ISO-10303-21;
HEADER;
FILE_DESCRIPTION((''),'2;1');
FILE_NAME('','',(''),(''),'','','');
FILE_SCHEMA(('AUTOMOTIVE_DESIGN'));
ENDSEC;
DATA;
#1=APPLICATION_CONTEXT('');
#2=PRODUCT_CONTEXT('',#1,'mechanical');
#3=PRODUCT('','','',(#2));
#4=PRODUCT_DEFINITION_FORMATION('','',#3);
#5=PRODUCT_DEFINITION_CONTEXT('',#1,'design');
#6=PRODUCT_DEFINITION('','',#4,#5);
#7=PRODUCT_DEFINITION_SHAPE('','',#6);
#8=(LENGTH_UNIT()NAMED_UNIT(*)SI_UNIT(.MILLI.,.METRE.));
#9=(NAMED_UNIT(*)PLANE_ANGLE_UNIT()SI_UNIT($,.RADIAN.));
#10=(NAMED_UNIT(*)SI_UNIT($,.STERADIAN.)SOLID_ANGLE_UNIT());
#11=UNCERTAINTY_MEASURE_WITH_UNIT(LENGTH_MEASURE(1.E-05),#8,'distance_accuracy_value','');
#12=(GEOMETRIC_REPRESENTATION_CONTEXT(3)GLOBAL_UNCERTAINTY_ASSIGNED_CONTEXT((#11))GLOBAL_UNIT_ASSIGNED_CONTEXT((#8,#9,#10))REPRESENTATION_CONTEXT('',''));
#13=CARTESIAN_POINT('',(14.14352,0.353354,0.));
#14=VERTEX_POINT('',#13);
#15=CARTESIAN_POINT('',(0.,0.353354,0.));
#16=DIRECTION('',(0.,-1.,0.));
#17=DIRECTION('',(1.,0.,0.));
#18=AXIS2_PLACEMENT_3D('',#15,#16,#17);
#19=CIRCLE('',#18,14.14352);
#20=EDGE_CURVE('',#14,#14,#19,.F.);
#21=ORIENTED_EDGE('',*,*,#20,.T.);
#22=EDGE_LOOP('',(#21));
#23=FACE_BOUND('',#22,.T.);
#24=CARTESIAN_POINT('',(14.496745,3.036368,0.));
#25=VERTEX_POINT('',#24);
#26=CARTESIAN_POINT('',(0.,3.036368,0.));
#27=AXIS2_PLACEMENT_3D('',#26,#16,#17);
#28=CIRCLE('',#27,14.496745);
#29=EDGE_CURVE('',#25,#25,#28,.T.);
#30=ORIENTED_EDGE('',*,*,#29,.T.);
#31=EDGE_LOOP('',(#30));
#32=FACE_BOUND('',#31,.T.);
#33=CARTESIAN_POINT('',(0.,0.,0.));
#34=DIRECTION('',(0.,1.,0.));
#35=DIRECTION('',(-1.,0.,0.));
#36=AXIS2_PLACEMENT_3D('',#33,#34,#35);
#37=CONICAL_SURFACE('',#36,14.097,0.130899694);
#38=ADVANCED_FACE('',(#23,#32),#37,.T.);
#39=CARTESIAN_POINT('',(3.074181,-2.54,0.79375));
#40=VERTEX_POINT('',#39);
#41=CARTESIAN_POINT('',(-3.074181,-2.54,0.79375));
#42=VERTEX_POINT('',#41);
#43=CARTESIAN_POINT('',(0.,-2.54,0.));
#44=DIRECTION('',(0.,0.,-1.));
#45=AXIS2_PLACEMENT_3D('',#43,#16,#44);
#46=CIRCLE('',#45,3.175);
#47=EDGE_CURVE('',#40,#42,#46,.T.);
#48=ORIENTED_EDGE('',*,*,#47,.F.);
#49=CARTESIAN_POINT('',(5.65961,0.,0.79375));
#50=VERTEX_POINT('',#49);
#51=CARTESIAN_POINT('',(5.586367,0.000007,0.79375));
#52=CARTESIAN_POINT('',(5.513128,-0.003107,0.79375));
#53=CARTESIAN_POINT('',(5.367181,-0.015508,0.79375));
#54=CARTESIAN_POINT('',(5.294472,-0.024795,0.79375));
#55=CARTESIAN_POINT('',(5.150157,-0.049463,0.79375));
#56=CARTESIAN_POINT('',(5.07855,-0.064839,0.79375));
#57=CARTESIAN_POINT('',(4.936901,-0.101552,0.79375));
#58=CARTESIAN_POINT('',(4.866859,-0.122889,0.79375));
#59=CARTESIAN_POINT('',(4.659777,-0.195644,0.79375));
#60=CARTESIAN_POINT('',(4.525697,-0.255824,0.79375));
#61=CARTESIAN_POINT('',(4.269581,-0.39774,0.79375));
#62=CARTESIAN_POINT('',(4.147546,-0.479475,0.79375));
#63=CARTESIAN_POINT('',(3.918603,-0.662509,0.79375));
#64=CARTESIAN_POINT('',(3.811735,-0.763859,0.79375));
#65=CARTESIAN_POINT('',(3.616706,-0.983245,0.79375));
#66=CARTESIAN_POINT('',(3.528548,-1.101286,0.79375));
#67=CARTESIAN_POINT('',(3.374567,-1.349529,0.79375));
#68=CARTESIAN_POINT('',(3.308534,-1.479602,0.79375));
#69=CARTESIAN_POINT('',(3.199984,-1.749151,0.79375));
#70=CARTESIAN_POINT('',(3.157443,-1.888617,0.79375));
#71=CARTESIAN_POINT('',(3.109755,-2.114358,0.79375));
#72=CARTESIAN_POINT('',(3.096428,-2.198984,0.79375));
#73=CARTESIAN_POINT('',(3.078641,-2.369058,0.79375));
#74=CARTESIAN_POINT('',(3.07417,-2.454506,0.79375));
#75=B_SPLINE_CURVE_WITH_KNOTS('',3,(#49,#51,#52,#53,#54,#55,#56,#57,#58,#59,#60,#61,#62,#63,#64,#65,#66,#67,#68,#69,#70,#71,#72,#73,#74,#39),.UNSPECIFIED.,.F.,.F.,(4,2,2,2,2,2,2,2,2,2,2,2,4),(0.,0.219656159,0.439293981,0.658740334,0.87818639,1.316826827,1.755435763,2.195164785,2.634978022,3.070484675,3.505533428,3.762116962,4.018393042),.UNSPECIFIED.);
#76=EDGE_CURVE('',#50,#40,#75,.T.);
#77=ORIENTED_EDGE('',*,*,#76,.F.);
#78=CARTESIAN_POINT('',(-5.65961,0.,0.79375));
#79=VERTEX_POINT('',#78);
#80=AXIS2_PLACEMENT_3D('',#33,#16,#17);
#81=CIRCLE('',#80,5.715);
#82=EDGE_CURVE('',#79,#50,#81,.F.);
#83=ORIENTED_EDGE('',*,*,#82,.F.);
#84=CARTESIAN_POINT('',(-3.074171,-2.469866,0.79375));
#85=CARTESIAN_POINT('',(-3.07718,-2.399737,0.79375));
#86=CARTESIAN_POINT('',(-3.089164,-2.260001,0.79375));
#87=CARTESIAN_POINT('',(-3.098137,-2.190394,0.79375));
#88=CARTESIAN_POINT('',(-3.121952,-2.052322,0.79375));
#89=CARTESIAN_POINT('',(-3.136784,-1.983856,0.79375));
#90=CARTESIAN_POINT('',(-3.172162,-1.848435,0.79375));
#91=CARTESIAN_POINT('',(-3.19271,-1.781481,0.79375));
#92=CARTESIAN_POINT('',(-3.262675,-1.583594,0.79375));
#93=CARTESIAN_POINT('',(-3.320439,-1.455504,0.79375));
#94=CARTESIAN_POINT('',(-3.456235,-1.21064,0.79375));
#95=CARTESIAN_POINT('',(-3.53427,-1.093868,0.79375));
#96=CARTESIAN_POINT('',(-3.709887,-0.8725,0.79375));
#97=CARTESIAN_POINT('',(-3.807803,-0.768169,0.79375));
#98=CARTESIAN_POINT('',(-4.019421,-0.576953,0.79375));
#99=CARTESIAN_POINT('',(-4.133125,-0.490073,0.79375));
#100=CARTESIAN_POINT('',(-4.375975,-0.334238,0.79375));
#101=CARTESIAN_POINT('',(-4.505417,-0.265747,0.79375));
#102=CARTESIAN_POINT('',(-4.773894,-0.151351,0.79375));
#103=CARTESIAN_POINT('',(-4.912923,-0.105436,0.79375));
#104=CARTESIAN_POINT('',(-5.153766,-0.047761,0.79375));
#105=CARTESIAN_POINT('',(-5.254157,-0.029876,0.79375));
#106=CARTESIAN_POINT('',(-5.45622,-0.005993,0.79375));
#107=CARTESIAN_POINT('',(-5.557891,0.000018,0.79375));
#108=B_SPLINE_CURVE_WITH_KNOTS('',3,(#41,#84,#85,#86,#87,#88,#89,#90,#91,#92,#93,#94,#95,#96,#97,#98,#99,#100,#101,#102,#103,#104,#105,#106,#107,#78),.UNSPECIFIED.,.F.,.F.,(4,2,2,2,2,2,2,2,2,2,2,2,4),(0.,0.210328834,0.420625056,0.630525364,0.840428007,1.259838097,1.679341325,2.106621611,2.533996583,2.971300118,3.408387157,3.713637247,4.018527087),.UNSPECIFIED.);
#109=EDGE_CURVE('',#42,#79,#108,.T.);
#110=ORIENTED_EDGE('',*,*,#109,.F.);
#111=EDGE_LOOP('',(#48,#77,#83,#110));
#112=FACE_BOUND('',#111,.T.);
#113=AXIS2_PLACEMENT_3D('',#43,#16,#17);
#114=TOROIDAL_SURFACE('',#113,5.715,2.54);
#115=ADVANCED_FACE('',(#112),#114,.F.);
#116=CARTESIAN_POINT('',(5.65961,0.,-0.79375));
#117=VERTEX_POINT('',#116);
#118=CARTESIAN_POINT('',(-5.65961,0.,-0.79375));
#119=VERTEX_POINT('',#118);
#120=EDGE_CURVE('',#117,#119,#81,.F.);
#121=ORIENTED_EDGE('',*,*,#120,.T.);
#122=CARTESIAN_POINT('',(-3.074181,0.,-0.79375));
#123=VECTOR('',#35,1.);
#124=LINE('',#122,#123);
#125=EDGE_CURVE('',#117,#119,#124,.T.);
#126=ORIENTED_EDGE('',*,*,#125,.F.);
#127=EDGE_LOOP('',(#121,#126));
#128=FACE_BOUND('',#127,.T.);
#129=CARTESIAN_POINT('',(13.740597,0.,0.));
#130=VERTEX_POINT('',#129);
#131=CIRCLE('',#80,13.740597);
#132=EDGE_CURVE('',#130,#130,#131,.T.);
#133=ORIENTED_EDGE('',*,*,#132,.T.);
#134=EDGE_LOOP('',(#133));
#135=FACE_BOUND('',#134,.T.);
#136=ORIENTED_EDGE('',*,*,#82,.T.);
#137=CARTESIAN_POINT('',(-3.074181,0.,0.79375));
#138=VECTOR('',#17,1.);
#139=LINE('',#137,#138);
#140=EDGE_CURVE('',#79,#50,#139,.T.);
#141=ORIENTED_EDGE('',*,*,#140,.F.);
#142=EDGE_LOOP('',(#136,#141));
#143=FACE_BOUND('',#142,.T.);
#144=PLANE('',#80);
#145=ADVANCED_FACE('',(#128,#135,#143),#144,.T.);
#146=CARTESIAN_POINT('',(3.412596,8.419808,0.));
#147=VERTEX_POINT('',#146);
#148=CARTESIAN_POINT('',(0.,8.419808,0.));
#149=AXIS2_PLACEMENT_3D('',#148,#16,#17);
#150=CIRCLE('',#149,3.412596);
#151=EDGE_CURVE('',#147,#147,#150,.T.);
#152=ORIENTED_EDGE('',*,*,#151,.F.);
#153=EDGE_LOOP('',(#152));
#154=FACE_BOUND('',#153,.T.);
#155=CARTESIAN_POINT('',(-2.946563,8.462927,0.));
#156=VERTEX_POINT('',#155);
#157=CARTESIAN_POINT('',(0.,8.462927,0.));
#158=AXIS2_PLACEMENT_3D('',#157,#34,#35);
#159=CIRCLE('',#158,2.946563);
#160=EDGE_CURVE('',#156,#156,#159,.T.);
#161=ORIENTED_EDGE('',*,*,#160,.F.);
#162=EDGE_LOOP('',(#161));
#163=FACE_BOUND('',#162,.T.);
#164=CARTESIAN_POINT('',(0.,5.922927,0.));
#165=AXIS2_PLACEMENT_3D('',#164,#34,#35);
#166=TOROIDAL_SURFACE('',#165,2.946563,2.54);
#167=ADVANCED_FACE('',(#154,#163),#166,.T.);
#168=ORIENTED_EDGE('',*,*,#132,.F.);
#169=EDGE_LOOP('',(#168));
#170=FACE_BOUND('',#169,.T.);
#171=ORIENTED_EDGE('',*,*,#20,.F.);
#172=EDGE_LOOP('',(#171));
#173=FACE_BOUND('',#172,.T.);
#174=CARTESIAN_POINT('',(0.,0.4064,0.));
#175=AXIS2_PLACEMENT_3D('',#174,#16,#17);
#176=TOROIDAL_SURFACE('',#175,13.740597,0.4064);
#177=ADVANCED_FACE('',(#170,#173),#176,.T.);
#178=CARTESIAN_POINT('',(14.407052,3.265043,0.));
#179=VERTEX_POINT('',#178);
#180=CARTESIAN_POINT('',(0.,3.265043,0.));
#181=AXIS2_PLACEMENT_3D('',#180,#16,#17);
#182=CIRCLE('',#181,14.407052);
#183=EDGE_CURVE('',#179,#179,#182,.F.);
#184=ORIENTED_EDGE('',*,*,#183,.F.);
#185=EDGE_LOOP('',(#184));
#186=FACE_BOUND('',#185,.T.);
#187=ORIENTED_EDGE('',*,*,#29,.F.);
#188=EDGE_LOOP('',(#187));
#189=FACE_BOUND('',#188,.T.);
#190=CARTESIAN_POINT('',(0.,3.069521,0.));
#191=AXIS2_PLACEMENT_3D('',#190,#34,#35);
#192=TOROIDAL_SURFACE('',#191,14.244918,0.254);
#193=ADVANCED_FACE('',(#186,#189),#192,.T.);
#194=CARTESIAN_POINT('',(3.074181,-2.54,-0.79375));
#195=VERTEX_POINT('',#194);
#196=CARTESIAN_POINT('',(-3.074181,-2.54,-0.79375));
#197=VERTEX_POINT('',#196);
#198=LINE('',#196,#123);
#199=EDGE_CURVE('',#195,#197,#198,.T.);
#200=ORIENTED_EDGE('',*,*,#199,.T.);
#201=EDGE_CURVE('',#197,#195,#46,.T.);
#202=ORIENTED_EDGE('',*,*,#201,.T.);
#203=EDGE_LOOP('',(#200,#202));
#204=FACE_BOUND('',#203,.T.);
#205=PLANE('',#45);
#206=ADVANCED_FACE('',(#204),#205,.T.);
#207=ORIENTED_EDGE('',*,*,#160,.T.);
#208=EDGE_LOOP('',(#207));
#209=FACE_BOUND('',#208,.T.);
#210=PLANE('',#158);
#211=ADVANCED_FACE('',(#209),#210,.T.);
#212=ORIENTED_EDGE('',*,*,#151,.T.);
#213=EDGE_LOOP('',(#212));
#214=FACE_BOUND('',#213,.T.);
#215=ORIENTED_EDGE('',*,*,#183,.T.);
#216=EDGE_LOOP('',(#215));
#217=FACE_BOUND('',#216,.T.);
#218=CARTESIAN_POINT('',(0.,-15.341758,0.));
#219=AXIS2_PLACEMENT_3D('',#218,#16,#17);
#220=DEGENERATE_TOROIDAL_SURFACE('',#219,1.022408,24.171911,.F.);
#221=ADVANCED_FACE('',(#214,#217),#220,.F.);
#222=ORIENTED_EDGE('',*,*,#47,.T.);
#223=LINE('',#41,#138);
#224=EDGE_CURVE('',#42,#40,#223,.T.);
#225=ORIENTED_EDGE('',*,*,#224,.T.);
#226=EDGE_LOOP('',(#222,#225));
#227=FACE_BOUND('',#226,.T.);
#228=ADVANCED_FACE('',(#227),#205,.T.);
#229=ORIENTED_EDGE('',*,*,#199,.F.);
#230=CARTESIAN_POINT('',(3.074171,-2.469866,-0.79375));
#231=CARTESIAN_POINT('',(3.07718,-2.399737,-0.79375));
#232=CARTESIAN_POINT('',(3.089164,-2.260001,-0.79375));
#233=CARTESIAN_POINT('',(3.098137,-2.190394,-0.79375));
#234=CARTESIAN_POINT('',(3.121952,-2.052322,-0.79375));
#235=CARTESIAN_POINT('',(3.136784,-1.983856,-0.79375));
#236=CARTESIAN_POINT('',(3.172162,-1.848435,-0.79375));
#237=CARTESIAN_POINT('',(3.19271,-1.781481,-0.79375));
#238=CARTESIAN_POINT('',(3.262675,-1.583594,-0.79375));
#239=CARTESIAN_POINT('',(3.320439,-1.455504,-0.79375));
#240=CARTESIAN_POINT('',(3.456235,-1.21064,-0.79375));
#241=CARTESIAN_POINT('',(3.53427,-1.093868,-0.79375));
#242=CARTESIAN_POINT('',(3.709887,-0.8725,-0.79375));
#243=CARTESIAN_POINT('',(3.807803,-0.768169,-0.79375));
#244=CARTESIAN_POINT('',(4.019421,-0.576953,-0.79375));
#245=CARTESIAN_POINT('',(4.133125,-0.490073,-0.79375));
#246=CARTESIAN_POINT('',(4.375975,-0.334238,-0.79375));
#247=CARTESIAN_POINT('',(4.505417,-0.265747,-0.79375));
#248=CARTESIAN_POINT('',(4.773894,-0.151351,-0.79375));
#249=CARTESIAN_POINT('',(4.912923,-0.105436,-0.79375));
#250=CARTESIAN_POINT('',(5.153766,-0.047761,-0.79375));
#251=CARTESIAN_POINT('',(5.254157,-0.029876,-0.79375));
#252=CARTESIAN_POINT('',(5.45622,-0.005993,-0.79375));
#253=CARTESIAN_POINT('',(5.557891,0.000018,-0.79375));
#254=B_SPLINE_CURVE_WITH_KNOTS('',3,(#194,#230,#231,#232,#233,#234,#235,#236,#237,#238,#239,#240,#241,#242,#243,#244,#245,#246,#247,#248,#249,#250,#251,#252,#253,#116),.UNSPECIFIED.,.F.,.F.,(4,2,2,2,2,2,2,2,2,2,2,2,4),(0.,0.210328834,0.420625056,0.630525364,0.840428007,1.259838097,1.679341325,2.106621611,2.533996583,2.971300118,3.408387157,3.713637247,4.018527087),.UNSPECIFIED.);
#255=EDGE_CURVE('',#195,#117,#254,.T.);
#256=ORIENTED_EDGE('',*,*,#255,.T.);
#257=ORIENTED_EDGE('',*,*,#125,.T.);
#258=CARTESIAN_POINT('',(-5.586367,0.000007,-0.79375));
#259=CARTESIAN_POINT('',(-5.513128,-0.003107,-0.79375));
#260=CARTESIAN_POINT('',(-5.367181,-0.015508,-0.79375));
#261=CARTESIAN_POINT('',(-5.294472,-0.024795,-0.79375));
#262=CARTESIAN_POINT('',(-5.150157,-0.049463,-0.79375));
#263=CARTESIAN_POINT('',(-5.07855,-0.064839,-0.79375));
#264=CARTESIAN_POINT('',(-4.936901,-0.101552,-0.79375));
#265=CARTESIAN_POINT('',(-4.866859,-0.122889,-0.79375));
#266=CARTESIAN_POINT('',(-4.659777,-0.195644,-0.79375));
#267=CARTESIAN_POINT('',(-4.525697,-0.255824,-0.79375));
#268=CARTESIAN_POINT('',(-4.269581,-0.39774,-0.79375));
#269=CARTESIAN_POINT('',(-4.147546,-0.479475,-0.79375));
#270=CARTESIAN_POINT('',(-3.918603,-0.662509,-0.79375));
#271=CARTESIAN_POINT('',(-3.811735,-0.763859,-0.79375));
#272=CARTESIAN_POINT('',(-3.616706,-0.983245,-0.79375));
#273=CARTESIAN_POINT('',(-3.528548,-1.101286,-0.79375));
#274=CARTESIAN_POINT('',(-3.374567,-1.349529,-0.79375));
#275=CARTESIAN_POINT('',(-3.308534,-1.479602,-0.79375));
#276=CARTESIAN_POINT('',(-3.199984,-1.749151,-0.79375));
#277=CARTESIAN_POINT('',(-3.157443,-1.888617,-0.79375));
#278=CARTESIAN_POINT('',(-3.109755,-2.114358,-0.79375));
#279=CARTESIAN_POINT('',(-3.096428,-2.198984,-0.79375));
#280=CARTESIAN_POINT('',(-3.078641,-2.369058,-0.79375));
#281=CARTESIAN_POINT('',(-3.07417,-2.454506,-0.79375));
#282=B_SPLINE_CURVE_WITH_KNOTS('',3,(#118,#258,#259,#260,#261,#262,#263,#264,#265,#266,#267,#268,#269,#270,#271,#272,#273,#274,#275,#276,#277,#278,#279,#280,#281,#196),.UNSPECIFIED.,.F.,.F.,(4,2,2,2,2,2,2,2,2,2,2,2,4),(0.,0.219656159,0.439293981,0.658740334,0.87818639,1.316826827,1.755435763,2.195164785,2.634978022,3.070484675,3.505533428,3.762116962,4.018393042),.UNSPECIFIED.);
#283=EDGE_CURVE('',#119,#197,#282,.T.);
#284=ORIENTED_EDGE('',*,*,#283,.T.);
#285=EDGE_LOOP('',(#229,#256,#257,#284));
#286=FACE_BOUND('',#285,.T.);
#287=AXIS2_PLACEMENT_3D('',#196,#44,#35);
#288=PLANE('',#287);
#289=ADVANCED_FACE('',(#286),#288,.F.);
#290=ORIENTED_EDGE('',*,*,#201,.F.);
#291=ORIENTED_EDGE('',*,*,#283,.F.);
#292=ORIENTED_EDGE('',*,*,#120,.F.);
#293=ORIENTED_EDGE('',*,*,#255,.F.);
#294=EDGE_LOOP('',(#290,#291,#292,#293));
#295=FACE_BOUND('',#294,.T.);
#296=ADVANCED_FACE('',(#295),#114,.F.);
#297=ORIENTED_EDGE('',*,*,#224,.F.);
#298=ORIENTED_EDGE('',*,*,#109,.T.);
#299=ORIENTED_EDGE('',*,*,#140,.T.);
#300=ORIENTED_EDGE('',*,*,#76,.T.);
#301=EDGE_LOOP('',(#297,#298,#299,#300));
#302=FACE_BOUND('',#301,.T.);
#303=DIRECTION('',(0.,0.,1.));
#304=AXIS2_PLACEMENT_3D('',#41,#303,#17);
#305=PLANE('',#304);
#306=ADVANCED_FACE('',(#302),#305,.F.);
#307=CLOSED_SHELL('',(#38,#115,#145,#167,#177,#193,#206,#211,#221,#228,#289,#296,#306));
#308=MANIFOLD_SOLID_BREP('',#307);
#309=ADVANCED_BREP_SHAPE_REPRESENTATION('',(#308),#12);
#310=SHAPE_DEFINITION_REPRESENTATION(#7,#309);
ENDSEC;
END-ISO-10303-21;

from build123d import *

# Parameters (mm, degrees)
BOSS_EXTRUDE1_DEPTH = 2.54
BOTTOM_TOP_ROUNDS_R = 2.54
SIDE_ROUND_R        = 0.254
MATCH_TOOL_RADIUS_R = 0.4064


with BuildPart() as part:
    # Sketch2 → Revolve1 (revolve)
    with BuildSketch(Plane.XY):
        with BuildLine():
            Line((0, 0), (14.097, 0))
            Line((14.097, 0), (14.51499668, 3.175))
            ThreePointArc((14.51499668, 3.175), (9.193082758, 6.56543309), (3.175, 8.462927295))
            Line((3.175, 8.462927295), (0, 8.462927295))
            Line((0, 8.462927295), (0, 0))
        make_face()
    revolve(axis=Axis((0, 0, 0), (0, 1, 0)))

    # Sketch3 → Boss-Extrude1 (add)
    with BuildSketch(Plane.XZ):
        with BuildLine():
            Line((-3.074180531, 0.79375), (3.074180531, 0.79375))
            ThreePointArc((3.074180531, 0.79375), (0, 3.175), (-3.074180531, 0.79375))
        make_face()
        with BuildLine():
            Line((-3.074180531, -0.79375), (3.074180531, -0.79375))
            ThreePointArc((3.074180531, -0.79375), (0, -3.175), (-3.074180531, -0.79375))
        make_face()
    extrude(amount=BOSS_EXTRUDE1_DEPTH)

    # Bottom/Top Rounds
    # the kernel refuses this fillet: 2.54 mm, written as the material it adds along each edge
    with BuildSketch(Plane(origin=(0, 0, 0), x_dir=(0.0031415874858799556, 0, 0.9999950652018581), z_dir=(-0.9999950652018581, 0, 0.0031415874858799556))) as bottom_top_rounds_piece_1_section:
        with BuildLine():
            CenterArc((3.175 + BOTTOM_TOP_ROUNDS_R, -BOTTOM_TOP_ROUNDS_R), BOTTOM_TOP_ROUNDS_R, 90, 90)
            Line((3.175, -BOTTOM_TOP_ROUNDS_R), (3.175, 0))
            Line((3.175, 0), (3.175 + BOTTOM_TOP_ROUNDS_R, 0))
        make_face()
    bottom_top_rounds_piece_1 = revolve(axis=Axis((0, 0, 0), (0, 1, 0)), revolution_arc=359.64, mode=Mode.PRIVATE)
    bottom_top_rounds_piece_1 = split(bottom_top_rounds_piece_1, bisect_by=Plane(origin=(2.222683087, -0.525983554, 0.79375), z_dir=(0, 0, 1)), keep=Keep.TOP, mode=Mode.PRIVATE)
    add(bottom_top_rounds_piece_1)
    with BuildSketch(Plane(origin=(0, 0, 0), x_dir=(0.0031415874858799556, 0, 0.9999950652018581), z_dir=(-0.9999950652018581, 0, 0.0031415874858799556))) as bottom_top_rounds_piece_2_section:
        with BuildLine():
            CenterArc((3.175 + BOTTOM_TOP_ROUNDS_R, -BOTTOM_TOP_ROUNDS_R), BOTTOM_TOP_ROUNDS_R, 90, 90)
            Line((3.175, -BOTTOM_TOP_ROUNDS_R), (3.175, 0))
            Line((3.175, 0), (3.175 + BOTTOM_TOP_ROUNDS_R, 0))
        make_face()
    bottom_top_rounds_piece_2 = revolve(axis=Axis((0, 0, 0), (0, 1, 0)), revolution_arc=359.64, mode=Mode.PRIVATE)
    bottom_top_rounds_piece_2 = split(bottom_top_rounds_piece_2, bisect_by=Plane(origin=(0, -0.726881266, -0.79375), z_dir=(0, 0, -1)), keep=Keep.TOP, mode=Mode.PRIVATE)
    add(bottom_top_rounds_piece_2)
    with BuildSketch(Plane(origin=(0, 0, 0), x_dir=(0.0031415874858799556, 0, -0.9999950652018581), z_dir=(-0.9999950652018581, 0, -0.0031415874858799556))) as bottom_top_rounds_piece_3_section:
        with BuildLine():
            CenterArc((3.175 + BOTTOM_TOP_ROUNDS_R, BOTTOM_TOP_ROUNDS_R), BOTTOM_TOP_ROUNDS_R, 180, 90)
            Line((3.175, BOTTOM_TOP_ROUNDS_R), (3.175, 0))
            Line((3.175, 0), (3.175 + BOTTOM_TOP_ROUNDS_R, 0))
        make_face()
    bottom_top_rounds_piece_3 = revolve(axis=Axis((0, 0, 0), (0, -1, 0)), revolution_arc=359.64, mode=Mode.PRIVATE)
    bottom_top_rounds_piece_3 = split(bottom_top_rounds_piece_3, bisect_by=Plane(origin=(2.222683087, -0.525983554, -0.79375), z_dir=(0, 0, -1)), keep=Keep.TOP, mode=Mode.PRIVATE)
    add(bottom_top_rounds_piece_3)
    with BuildSketch(Plane(origin=(0, 0, 0), x_dir=(0.0031415874858799556, 0, -0.9999950652018581), z_dir=(-0.9999950652018581, 0, -0.0031415874858799556))) as bottom_top_rounds_piece_4_section:
        with BuildLine():
            CenterArc((3.175 + BOTTOM_TOP_ROUNDS_R, BOTTOM_TOP_ROUNDS_R), BOTTOM_TOP_ROUNDS_R, 180, 90)
            Line((3.175, BOTTOM_TOP_ROUNDS_R), (3.175, 0))
            Line((3.175, 0), (3.175 + BOTTOM_TOP_ROUNDS_R, 0))
        make_face()
    bottom_top_rounds_piece_4 = revolve(axis=Axis((0, 0, 0), (0, -1, 0)), revolution_arc=359.64, mode=Mode.PRIVATE)
    bottom_top_rounds_piece_4 = split(bottom_top_rounds_piece_4, bisect_by=Plane(origin=(0, -0.726881266, 0.79375), z_dir=(0, 0, 1)), keep=Keep.TOP, mode=Mode.PRIVATE)
    add(bottom_top_rounds_piece_4)
    # the kernel refuses this fillet: 2.54 mm, written as the material it takes off along each edge
    with BuildSketch(Plane(origin=(0, 8.462927295, 0), x_dir=(1, 0, 0), z_dir=(0, 0, 1))) as bottom_top_rounds_2_piece_1:
        with BuildLine():
            CenterArc((2.946562621, -2.54), BOTTOM_TOP_ROUNDS_R, 79.427614444, 10.572385556)
            ThreePointArc((3.412595702, -0.043119312), (3.293851696, -0.021262958), (3.175, 0))
            Line((3.175, 0), (2.946562621, 0))
        make_face()
    revolve(axis=Axis((0, 8.462927295, 0), (0, 1, 0)), mode=Mode.SUBTRACT)

    # Side Round
    side_round_edges = [part.edges().sort_by_distance(p)[0] for p in [
        (-14.51499668, 3.175, 0),
    ]]
    fillet(side_round_edges, radius=SIDE_ROUND_R)

    # Match Tool Radius
    match_tool_radius_edges = [part.edges().sort_by_distance(p)[0] for p in [
        (-14.097, 0, 0),
    ]]
    fillet(match_tool_radius_edges, radius=MATCH_TOOL_RADIUS_R)


solid = part.part
